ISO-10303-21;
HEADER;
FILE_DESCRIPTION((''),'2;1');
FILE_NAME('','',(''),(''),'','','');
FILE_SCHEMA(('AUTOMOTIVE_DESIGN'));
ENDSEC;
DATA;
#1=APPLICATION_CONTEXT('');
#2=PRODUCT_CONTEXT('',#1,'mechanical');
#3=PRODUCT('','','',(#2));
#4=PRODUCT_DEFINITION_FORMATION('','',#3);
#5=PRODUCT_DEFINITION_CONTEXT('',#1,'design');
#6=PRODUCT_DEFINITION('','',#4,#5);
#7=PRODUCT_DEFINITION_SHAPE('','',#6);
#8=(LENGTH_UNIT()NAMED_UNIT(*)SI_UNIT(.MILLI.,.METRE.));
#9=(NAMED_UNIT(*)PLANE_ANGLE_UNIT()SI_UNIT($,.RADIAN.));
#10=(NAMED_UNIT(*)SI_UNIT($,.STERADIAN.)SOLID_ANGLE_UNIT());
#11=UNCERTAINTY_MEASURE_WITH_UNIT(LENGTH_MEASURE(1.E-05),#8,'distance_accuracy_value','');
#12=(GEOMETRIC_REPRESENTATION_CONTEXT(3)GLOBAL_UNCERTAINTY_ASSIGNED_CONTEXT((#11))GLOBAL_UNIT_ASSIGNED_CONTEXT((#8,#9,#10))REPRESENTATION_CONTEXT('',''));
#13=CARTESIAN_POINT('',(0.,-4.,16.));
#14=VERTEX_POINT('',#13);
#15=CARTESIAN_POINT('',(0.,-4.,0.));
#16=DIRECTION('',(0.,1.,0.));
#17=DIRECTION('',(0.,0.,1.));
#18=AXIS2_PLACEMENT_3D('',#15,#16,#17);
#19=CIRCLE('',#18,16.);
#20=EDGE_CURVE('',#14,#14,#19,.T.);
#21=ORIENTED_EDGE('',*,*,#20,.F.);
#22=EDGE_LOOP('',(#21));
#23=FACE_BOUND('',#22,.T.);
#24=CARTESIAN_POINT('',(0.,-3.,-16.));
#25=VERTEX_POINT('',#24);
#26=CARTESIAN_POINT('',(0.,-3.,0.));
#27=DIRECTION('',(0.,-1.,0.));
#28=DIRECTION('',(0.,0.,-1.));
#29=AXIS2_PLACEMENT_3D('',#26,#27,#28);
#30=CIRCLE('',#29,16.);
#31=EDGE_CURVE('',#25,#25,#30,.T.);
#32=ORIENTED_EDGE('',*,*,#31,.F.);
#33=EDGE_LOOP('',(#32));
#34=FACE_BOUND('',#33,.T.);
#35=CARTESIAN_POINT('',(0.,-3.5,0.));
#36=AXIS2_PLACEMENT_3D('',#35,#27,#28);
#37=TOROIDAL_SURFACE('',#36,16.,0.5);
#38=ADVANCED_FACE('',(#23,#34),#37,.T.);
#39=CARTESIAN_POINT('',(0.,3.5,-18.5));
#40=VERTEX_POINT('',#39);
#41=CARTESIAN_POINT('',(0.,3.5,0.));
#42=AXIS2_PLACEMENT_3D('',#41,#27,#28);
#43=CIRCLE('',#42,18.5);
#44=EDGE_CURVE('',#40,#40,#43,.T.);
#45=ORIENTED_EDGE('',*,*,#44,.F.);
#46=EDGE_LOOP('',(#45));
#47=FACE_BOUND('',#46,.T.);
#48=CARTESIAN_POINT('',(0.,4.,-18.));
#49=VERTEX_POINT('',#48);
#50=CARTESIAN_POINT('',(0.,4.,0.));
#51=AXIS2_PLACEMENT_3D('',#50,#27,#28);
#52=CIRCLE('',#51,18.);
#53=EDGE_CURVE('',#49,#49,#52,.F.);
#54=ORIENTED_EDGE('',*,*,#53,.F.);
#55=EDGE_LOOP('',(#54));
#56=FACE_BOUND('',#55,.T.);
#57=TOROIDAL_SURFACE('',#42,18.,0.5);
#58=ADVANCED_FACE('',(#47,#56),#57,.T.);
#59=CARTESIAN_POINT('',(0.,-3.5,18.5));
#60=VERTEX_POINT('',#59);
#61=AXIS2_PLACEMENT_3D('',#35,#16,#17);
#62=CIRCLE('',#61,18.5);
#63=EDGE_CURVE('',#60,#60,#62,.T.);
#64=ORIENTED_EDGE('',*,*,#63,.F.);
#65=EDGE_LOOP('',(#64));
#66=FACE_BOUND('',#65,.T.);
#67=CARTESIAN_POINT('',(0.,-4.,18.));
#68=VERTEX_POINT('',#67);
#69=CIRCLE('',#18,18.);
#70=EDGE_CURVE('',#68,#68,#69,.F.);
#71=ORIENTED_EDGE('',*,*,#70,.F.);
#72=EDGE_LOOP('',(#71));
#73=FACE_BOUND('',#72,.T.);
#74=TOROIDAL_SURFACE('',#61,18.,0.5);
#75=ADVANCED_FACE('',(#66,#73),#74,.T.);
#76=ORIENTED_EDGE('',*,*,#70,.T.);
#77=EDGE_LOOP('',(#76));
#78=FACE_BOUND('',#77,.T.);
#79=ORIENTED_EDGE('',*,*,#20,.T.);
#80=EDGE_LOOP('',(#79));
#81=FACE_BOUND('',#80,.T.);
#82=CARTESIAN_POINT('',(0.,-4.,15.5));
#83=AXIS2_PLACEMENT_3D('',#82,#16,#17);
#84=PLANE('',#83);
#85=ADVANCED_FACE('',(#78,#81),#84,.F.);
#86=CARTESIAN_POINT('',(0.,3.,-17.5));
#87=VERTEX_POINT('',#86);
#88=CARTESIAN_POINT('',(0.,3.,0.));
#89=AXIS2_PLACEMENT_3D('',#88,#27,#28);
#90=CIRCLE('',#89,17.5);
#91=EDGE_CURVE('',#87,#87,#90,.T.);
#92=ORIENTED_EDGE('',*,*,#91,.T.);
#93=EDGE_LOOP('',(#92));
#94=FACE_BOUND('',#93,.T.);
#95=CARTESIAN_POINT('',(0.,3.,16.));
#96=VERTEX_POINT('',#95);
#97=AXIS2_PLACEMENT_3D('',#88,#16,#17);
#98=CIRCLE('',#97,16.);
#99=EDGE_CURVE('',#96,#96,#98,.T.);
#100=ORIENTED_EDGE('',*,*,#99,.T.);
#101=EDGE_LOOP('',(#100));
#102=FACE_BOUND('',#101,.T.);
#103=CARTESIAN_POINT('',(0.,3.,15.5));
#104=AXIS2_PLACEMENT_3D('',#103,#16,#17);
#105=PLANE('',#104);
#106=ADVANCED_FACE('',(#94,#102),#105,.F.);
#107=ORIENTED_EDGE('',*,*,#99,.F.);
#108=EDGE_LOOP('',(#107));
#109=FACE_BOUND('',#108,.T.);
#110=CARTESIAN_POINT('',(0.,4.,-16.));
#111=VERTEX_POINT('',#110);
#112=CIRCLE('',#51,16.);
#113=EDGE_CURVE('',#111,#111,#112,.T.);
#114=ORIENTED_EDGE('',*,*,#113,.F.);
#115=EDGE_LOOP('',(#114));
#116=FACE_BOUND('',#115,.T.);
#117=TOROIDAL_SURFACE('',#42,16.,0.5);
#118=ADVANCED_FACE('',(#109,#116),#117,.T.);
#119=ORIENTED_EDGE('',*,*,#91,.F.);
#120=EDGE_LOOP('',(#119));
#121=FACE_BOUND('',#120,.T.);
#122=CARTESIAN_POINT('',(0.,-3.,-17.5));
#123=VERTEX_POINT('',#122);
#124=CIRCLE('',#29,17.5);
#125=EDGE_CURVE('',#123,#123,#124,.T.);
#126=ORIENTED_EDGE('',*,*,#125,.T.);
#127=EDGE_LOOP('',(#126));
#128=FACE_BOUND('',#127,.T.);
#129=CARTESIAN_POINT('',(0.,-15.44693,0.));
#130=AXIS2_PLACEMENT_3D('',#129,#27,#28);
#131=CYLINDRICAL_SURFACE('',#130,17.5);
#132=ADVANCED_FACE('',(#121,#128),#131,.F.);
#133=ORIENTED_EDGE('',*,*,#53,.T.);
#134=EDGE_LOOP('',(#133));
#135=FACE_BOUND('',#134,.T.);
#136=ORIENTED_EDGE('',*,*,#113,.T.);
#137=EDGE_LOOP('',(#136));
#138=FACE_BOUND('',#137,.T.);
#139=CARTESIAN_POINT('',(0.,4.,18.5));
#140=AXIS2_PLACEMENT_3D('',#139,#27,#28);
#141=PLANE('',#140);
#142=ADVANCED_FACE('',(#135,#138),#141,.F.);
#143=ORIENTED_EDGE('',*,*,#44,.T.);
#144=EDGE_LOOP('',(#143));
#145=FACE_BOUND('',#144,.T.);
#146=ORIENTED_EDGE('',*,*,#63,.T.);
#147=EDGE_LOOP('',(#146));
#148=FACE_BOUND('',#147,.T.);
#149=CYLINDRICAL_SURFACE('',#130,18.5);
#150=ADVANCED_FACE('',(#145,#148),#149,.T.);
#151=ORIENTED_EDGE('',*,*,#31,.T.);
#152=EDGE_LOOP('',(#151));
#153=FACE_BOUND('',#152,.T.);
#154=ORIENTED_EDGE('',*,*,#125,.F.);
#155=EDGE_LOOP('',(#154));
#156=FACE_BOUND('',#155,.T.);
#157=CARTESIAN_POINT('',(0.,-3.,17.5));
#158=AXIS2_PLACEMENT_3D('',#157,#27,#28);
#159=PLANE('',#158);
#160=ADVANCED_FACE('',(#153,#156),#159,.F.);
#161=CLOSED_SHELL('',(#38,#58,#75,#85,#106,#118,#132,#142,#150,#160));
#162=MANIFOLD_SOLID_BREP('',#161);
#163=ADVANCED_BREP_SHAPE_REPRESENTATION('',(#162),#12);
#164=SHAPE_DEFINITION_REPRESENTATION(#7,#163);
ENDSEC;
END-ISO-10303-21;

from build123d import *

# Parameters (mm, degrees)
FILLET1_R = 0.5
FILLET2_R = 0.5
FILLET3_R = 0.5


with BuildPart() as part:
    # Sketch1 → Revolve1 (revolve)
    with BuildSketch(Plane.YZ, mode=Mode.PRIVATE) as revolve1_sk:
        Polygon((-4, 15.5), (-4, 18.5), (4, 18.5), (4, 15.5), (3, 15.5), (3, 17.5), (-3, 17.5), (-3, 15.5), align=None)
    revolve(revolve1_sk.sketch.rotate(Axis((0, -15.446930484, 0), (0, 1, 0)), 180), axis=Axis((0, -15.446930484, 0), (0, 1, 0)))

    # Fillet1
    fillet1_edges = [part.edges().sort_by_distance(p)[0] for p in [
        (0, 4, 18.5),
        (0, -4, 18.5),
    ]]
    fillet(fillet1_edges, radius=FILLET1_R)

    # Fillet2
    fillet2_edges = [part.edges().sort_by_distance(p)[0] for p in [
        (0, 3, 15.5),
        (0, 4, 15.5),
    ]]
    fillet(fillet2_edges, radius=FILLET2_R - 0.0001)  # a hair under: the kernel refuses the full size

    # Fillet3
    fillet3_edges = [part.edges().sort_by_distance(p)[0] for p in [
        (0, -4, 15.5),
        (0, -3, 15.5),
    ]]
    fillet(fillet3_edges, radius=FILLET3_R - 0.0001)  # a hair under: the kernel refuses the full size


solid = part.part
